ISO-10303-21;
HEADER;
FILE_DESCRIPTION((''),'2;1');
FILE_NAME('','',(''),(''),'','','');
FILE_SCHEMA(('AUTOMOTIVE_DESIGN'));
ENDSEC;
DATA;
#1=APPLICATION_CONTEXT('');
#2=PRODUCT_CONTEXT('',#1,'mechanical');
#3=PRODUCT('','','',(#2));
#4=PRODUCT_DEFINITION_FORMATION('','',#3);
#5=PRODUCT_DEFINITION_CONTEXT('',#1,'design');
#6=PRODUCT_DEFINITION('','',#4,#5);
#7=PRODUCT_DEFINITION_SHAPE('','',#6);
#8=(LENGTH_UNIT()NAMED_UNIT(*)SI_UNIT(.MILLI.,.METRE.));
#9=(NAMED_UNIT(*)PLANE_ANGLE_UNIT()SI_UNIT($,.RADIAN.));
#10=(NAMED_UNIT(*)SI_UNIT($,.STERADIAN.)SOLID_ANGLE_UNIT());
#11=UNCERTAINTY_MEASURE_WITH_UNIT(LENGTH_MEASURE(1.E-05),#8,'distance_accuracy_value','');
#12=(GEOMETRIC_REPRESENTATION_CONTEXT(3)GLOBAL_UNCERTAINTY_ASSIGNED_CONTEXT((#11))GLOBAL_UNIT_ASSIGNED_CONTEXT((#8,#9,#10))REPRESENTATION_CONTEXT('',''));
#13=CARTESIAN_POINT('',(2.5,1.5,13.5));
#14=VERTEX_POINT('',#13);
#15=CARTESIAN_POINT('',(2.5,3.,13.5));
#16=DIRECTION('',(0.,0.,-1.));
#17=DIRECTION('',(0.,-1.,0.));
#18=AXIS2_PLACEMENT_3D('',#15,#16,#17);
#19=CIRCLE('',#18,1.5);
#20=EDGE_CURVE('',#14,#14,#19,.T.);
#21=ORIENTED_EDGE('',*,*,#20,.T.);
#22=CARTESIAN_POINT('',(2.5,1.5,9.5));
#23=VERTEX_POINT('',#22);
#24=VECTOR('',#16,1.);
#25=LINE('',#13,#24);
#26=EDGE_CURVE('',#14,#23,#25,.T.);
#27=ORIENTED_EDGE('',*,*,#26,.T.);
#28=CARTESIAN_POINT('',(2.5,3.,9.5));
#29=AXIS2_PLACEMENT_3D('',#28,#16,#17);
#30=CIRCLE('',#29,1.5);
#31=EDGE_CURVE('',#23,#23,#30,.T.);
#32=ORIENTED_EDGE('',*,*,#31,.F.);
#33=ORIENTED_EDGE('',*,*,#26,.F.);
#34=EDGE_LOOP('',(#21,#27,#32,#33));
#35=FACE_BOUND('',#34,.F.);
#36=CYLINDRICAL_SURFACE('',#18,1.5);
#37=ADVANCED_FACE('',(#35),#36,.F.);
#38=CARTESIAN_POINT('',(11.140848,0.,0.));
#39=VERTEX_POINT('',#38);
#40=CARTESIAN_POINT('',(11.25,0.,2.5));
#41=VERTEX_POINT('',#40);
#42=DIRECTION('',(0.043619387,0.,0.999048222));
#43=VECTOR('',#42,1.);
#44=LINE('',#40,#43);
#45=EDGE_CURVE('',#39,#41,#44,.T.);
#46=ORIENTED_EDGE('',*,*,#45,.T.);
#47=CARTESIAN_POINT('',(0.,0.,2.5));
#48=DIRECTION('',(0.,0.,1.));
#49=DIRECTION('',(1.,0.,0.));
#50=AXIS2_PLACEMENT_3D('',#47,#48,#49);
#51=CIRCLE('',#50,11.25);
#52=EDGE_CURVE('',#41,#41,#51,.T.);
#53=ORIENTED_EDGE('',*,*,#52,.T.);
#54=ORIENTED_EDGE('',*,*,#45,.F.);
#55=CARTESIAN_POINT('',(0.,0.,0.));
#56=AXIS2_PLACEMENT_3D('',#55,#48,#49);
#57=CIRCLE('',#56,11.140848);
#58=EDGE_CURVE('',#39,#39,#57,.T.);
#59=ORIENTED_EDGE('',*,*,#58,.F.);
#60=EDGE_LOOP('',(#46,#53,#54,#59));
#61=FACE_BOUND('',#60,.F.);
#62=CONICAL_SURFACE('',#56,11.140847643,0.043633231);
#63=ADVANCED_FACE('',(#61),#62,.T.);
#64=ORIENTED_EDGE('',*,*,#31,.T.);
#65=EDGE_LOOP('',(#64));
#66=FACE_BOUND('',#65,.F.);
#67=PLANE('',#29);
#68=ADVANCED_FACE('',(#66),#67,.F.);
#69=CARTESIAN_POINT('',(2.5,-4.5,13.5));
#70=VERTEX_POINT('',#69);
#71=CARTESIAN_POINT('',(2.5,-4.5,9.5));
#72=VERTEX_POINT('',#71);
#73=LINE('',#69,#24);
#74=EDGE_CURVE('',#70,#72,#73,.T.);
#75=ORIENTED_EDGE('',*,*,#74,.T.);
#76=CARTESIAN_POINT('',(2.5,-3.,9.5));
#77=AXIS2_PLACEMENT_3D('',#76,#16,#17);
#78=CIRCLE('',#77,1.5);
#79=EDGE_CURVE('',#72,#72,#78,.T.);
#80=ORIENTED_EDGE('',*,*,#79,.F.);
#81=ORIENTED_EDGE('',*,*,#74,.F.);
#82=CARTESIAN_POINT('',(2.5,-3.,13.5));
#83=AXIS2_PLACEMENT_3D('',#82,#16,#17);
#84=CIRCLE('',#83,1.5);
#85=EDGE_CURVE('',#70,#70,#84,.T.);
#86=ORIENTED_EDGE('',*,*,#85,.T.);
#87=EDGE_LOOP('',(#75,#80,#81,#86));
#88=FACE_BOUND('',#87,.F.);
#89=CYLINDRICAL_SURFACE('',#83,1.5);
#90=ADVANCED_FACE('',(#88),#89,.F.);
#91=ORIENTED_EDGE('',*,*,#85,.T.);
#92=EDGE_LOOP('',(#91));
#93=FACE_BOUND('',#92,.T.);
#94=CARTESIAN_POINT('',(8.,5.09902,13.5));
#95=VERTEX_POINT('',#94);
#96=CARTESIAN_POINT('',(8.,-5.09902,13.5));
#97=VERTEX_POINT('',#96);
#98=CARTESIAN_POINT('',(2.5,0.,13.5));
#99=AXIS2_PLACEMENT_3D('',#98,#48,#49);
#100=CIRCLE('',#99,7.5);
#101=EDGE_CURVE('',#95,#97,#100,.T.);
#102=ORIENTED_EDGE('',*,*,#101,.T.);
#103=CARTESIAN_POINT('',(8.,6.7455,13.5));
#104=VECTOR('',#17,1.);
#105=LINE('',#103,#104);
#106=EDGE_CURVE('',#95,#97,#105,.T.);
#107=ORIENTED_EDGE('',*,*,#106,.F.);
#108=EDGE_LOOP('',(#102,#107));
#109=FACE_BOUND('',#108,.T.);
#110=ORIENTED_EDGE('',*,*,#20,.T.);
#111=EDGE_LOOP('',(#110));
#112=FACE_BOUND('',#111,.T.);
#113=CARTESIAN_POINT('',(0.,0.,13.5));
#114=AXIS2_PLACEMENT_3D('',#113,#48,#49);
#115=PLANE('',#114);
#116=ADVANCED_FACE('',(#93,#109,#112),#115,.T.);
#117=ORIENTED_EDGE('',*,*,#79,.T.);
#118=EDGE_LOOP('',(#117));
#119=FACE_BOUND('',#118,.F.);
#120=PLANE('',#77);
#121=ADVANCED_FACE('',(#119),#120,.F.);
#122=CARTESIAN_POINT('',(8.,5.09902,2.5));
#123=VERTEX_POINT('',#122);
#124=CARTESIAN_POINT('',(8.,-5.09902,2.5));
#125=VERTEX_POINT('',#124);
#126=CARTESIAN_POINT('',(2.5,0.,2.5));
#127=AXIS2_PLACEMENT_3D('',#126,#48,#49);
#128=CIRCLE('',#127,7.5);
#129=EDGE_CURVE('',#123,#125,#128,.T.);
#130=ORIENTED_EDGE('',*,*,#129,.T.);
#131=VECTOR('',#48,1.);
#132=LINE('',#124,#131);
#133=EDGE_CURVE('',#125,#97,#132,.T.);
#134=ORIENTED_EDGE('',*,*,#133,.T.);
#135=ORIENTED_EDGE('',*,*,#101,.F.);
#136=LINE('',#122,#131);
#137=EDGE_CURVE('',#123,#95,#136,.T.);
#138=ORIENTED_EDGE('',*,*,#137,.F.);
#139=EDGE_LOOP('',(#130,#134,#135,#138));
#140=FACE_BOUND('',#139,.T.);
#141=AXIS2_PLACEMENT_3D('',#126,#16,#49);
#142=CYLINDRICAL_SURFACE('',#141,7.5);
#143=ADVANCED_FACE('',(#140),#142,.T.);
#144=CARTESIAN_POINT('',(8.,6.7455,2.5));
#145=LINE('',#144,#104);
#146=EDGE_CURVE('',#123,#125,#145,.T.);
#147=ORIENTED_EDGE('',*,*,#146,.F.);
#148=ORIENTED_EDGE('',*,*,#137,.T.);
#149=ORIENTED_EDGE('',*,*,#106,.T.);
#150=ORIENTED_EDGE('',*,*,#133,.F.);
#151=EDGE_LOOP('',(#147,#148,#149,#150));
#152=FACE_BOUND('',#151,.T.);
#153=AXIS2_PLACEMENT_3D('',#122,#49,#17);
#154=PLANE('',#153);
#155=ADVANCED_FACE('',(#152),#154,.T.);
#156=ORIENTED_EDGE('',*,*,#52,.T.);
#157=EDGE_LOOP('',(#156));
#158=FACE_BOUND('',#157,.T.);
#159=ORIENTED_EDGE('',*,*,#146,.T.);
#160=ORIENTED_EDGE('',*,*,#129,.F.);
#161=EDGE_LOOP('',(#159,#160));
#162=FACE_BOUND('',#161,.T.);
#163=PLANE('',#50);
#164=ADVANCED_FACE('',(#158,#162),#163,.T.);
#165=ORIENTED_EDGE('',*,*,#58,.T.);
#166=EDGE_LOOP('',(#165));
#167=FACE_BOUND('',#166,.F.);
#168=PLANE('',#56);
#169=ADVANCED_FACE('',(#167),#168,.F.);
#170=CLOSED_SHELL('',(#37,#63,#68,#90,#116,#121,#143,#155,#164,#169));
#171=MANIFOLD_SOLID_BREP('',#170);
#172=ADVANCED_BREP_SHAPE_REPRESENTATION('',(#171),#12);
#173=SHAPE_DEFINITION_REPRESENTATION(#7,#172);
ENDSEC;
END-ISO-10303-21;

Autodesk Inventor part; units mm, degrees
ref_plane "YZ Plane" through (0, 0, 0) normal (1, 0, 0) x (0, 1, 0)
ref_plane "XZ Plane" through (0, 0, 0) normal (0, 1, 0) x (-1, 0, 0)
sketch "Sketch1" plane through (0, 0, 0) normal (0, 0, 1) x (1, 0, 0)
  circle A0 centre (0, 0) radius 11.25
  line L0 (0, 0) -> (2.5, 0)
  circle A1 centre (2.5, 0) radius 7.5
  line L1 (8, 6.7455) -> (8, -7.7933)
  point P0 (10, 0)
  point P1 (10, 0)
  point P2 (8, -5.099)
  point P3 (8, 5.099)
  dimension "d2" = 15
  dimension "d0" = 22.5
  dimension "d1" = 2.5
  dimension "d3" = 2
extrude "Extrusion1" add sketch "Sketch1" along normal blind 2.5 contours A0 | A1 L1 | L1 A1
extrude "Extrusion2" add sketch "Sketch1" along normal blind 11 from surface at 2.5 contours L1 A1 picked at (-0.3888, 1.1518)
sketch "Sketch2" plane through (2.5, 0, 13.5) normal (0, 0, 1) x (1, 0, 0)
  line L0 (0, 0) -> (0, 3)
  circle A0 centre (0, 3) radius 2.75
  line L1 (-18.25, 0) -> (13.25, 0) construction
  circle A1 centre (0, -3) radius 2.75
  point P0 (-2.5, 0)
  dimension "d8" = 3
  dimension "d23" = 5.5
hole "Hole1" at (2.5, 3, 13.5) at (2.5, -3, 13.5) direction (0, 0, -1) diameter 3 depth 4
draft "FaceDraft1" angle 2.5 pull direction (0, 0, -1) faces at (11.1043, -1.8046, 1.6667) fixed edges at (-11.25, 0, 2.5)
sketch "Sketch3" plane through (0, 0, 20) normal (0, 0, 1) x (1, 0, 0)
  arc A0 (5.5, 4) -> (5.5, -4) centre (2.5, 0) ccw projected
  circle A1 centre (2.5, 2) radius 1.5 projected
  circle A2 centre (2.5, -1.8526) radius 1.5 projected
  line L0 (2.5, 5) -> (27.5, 5)
  line L1 (2.5, -5) -> (27.5, -5)
  line L2 (27.5, -5) -> (27.5, 5)
  point P0 (0, 0)
  dimension "d18" = 25
  dimension "d19" = 25
properties part number "Axl"
